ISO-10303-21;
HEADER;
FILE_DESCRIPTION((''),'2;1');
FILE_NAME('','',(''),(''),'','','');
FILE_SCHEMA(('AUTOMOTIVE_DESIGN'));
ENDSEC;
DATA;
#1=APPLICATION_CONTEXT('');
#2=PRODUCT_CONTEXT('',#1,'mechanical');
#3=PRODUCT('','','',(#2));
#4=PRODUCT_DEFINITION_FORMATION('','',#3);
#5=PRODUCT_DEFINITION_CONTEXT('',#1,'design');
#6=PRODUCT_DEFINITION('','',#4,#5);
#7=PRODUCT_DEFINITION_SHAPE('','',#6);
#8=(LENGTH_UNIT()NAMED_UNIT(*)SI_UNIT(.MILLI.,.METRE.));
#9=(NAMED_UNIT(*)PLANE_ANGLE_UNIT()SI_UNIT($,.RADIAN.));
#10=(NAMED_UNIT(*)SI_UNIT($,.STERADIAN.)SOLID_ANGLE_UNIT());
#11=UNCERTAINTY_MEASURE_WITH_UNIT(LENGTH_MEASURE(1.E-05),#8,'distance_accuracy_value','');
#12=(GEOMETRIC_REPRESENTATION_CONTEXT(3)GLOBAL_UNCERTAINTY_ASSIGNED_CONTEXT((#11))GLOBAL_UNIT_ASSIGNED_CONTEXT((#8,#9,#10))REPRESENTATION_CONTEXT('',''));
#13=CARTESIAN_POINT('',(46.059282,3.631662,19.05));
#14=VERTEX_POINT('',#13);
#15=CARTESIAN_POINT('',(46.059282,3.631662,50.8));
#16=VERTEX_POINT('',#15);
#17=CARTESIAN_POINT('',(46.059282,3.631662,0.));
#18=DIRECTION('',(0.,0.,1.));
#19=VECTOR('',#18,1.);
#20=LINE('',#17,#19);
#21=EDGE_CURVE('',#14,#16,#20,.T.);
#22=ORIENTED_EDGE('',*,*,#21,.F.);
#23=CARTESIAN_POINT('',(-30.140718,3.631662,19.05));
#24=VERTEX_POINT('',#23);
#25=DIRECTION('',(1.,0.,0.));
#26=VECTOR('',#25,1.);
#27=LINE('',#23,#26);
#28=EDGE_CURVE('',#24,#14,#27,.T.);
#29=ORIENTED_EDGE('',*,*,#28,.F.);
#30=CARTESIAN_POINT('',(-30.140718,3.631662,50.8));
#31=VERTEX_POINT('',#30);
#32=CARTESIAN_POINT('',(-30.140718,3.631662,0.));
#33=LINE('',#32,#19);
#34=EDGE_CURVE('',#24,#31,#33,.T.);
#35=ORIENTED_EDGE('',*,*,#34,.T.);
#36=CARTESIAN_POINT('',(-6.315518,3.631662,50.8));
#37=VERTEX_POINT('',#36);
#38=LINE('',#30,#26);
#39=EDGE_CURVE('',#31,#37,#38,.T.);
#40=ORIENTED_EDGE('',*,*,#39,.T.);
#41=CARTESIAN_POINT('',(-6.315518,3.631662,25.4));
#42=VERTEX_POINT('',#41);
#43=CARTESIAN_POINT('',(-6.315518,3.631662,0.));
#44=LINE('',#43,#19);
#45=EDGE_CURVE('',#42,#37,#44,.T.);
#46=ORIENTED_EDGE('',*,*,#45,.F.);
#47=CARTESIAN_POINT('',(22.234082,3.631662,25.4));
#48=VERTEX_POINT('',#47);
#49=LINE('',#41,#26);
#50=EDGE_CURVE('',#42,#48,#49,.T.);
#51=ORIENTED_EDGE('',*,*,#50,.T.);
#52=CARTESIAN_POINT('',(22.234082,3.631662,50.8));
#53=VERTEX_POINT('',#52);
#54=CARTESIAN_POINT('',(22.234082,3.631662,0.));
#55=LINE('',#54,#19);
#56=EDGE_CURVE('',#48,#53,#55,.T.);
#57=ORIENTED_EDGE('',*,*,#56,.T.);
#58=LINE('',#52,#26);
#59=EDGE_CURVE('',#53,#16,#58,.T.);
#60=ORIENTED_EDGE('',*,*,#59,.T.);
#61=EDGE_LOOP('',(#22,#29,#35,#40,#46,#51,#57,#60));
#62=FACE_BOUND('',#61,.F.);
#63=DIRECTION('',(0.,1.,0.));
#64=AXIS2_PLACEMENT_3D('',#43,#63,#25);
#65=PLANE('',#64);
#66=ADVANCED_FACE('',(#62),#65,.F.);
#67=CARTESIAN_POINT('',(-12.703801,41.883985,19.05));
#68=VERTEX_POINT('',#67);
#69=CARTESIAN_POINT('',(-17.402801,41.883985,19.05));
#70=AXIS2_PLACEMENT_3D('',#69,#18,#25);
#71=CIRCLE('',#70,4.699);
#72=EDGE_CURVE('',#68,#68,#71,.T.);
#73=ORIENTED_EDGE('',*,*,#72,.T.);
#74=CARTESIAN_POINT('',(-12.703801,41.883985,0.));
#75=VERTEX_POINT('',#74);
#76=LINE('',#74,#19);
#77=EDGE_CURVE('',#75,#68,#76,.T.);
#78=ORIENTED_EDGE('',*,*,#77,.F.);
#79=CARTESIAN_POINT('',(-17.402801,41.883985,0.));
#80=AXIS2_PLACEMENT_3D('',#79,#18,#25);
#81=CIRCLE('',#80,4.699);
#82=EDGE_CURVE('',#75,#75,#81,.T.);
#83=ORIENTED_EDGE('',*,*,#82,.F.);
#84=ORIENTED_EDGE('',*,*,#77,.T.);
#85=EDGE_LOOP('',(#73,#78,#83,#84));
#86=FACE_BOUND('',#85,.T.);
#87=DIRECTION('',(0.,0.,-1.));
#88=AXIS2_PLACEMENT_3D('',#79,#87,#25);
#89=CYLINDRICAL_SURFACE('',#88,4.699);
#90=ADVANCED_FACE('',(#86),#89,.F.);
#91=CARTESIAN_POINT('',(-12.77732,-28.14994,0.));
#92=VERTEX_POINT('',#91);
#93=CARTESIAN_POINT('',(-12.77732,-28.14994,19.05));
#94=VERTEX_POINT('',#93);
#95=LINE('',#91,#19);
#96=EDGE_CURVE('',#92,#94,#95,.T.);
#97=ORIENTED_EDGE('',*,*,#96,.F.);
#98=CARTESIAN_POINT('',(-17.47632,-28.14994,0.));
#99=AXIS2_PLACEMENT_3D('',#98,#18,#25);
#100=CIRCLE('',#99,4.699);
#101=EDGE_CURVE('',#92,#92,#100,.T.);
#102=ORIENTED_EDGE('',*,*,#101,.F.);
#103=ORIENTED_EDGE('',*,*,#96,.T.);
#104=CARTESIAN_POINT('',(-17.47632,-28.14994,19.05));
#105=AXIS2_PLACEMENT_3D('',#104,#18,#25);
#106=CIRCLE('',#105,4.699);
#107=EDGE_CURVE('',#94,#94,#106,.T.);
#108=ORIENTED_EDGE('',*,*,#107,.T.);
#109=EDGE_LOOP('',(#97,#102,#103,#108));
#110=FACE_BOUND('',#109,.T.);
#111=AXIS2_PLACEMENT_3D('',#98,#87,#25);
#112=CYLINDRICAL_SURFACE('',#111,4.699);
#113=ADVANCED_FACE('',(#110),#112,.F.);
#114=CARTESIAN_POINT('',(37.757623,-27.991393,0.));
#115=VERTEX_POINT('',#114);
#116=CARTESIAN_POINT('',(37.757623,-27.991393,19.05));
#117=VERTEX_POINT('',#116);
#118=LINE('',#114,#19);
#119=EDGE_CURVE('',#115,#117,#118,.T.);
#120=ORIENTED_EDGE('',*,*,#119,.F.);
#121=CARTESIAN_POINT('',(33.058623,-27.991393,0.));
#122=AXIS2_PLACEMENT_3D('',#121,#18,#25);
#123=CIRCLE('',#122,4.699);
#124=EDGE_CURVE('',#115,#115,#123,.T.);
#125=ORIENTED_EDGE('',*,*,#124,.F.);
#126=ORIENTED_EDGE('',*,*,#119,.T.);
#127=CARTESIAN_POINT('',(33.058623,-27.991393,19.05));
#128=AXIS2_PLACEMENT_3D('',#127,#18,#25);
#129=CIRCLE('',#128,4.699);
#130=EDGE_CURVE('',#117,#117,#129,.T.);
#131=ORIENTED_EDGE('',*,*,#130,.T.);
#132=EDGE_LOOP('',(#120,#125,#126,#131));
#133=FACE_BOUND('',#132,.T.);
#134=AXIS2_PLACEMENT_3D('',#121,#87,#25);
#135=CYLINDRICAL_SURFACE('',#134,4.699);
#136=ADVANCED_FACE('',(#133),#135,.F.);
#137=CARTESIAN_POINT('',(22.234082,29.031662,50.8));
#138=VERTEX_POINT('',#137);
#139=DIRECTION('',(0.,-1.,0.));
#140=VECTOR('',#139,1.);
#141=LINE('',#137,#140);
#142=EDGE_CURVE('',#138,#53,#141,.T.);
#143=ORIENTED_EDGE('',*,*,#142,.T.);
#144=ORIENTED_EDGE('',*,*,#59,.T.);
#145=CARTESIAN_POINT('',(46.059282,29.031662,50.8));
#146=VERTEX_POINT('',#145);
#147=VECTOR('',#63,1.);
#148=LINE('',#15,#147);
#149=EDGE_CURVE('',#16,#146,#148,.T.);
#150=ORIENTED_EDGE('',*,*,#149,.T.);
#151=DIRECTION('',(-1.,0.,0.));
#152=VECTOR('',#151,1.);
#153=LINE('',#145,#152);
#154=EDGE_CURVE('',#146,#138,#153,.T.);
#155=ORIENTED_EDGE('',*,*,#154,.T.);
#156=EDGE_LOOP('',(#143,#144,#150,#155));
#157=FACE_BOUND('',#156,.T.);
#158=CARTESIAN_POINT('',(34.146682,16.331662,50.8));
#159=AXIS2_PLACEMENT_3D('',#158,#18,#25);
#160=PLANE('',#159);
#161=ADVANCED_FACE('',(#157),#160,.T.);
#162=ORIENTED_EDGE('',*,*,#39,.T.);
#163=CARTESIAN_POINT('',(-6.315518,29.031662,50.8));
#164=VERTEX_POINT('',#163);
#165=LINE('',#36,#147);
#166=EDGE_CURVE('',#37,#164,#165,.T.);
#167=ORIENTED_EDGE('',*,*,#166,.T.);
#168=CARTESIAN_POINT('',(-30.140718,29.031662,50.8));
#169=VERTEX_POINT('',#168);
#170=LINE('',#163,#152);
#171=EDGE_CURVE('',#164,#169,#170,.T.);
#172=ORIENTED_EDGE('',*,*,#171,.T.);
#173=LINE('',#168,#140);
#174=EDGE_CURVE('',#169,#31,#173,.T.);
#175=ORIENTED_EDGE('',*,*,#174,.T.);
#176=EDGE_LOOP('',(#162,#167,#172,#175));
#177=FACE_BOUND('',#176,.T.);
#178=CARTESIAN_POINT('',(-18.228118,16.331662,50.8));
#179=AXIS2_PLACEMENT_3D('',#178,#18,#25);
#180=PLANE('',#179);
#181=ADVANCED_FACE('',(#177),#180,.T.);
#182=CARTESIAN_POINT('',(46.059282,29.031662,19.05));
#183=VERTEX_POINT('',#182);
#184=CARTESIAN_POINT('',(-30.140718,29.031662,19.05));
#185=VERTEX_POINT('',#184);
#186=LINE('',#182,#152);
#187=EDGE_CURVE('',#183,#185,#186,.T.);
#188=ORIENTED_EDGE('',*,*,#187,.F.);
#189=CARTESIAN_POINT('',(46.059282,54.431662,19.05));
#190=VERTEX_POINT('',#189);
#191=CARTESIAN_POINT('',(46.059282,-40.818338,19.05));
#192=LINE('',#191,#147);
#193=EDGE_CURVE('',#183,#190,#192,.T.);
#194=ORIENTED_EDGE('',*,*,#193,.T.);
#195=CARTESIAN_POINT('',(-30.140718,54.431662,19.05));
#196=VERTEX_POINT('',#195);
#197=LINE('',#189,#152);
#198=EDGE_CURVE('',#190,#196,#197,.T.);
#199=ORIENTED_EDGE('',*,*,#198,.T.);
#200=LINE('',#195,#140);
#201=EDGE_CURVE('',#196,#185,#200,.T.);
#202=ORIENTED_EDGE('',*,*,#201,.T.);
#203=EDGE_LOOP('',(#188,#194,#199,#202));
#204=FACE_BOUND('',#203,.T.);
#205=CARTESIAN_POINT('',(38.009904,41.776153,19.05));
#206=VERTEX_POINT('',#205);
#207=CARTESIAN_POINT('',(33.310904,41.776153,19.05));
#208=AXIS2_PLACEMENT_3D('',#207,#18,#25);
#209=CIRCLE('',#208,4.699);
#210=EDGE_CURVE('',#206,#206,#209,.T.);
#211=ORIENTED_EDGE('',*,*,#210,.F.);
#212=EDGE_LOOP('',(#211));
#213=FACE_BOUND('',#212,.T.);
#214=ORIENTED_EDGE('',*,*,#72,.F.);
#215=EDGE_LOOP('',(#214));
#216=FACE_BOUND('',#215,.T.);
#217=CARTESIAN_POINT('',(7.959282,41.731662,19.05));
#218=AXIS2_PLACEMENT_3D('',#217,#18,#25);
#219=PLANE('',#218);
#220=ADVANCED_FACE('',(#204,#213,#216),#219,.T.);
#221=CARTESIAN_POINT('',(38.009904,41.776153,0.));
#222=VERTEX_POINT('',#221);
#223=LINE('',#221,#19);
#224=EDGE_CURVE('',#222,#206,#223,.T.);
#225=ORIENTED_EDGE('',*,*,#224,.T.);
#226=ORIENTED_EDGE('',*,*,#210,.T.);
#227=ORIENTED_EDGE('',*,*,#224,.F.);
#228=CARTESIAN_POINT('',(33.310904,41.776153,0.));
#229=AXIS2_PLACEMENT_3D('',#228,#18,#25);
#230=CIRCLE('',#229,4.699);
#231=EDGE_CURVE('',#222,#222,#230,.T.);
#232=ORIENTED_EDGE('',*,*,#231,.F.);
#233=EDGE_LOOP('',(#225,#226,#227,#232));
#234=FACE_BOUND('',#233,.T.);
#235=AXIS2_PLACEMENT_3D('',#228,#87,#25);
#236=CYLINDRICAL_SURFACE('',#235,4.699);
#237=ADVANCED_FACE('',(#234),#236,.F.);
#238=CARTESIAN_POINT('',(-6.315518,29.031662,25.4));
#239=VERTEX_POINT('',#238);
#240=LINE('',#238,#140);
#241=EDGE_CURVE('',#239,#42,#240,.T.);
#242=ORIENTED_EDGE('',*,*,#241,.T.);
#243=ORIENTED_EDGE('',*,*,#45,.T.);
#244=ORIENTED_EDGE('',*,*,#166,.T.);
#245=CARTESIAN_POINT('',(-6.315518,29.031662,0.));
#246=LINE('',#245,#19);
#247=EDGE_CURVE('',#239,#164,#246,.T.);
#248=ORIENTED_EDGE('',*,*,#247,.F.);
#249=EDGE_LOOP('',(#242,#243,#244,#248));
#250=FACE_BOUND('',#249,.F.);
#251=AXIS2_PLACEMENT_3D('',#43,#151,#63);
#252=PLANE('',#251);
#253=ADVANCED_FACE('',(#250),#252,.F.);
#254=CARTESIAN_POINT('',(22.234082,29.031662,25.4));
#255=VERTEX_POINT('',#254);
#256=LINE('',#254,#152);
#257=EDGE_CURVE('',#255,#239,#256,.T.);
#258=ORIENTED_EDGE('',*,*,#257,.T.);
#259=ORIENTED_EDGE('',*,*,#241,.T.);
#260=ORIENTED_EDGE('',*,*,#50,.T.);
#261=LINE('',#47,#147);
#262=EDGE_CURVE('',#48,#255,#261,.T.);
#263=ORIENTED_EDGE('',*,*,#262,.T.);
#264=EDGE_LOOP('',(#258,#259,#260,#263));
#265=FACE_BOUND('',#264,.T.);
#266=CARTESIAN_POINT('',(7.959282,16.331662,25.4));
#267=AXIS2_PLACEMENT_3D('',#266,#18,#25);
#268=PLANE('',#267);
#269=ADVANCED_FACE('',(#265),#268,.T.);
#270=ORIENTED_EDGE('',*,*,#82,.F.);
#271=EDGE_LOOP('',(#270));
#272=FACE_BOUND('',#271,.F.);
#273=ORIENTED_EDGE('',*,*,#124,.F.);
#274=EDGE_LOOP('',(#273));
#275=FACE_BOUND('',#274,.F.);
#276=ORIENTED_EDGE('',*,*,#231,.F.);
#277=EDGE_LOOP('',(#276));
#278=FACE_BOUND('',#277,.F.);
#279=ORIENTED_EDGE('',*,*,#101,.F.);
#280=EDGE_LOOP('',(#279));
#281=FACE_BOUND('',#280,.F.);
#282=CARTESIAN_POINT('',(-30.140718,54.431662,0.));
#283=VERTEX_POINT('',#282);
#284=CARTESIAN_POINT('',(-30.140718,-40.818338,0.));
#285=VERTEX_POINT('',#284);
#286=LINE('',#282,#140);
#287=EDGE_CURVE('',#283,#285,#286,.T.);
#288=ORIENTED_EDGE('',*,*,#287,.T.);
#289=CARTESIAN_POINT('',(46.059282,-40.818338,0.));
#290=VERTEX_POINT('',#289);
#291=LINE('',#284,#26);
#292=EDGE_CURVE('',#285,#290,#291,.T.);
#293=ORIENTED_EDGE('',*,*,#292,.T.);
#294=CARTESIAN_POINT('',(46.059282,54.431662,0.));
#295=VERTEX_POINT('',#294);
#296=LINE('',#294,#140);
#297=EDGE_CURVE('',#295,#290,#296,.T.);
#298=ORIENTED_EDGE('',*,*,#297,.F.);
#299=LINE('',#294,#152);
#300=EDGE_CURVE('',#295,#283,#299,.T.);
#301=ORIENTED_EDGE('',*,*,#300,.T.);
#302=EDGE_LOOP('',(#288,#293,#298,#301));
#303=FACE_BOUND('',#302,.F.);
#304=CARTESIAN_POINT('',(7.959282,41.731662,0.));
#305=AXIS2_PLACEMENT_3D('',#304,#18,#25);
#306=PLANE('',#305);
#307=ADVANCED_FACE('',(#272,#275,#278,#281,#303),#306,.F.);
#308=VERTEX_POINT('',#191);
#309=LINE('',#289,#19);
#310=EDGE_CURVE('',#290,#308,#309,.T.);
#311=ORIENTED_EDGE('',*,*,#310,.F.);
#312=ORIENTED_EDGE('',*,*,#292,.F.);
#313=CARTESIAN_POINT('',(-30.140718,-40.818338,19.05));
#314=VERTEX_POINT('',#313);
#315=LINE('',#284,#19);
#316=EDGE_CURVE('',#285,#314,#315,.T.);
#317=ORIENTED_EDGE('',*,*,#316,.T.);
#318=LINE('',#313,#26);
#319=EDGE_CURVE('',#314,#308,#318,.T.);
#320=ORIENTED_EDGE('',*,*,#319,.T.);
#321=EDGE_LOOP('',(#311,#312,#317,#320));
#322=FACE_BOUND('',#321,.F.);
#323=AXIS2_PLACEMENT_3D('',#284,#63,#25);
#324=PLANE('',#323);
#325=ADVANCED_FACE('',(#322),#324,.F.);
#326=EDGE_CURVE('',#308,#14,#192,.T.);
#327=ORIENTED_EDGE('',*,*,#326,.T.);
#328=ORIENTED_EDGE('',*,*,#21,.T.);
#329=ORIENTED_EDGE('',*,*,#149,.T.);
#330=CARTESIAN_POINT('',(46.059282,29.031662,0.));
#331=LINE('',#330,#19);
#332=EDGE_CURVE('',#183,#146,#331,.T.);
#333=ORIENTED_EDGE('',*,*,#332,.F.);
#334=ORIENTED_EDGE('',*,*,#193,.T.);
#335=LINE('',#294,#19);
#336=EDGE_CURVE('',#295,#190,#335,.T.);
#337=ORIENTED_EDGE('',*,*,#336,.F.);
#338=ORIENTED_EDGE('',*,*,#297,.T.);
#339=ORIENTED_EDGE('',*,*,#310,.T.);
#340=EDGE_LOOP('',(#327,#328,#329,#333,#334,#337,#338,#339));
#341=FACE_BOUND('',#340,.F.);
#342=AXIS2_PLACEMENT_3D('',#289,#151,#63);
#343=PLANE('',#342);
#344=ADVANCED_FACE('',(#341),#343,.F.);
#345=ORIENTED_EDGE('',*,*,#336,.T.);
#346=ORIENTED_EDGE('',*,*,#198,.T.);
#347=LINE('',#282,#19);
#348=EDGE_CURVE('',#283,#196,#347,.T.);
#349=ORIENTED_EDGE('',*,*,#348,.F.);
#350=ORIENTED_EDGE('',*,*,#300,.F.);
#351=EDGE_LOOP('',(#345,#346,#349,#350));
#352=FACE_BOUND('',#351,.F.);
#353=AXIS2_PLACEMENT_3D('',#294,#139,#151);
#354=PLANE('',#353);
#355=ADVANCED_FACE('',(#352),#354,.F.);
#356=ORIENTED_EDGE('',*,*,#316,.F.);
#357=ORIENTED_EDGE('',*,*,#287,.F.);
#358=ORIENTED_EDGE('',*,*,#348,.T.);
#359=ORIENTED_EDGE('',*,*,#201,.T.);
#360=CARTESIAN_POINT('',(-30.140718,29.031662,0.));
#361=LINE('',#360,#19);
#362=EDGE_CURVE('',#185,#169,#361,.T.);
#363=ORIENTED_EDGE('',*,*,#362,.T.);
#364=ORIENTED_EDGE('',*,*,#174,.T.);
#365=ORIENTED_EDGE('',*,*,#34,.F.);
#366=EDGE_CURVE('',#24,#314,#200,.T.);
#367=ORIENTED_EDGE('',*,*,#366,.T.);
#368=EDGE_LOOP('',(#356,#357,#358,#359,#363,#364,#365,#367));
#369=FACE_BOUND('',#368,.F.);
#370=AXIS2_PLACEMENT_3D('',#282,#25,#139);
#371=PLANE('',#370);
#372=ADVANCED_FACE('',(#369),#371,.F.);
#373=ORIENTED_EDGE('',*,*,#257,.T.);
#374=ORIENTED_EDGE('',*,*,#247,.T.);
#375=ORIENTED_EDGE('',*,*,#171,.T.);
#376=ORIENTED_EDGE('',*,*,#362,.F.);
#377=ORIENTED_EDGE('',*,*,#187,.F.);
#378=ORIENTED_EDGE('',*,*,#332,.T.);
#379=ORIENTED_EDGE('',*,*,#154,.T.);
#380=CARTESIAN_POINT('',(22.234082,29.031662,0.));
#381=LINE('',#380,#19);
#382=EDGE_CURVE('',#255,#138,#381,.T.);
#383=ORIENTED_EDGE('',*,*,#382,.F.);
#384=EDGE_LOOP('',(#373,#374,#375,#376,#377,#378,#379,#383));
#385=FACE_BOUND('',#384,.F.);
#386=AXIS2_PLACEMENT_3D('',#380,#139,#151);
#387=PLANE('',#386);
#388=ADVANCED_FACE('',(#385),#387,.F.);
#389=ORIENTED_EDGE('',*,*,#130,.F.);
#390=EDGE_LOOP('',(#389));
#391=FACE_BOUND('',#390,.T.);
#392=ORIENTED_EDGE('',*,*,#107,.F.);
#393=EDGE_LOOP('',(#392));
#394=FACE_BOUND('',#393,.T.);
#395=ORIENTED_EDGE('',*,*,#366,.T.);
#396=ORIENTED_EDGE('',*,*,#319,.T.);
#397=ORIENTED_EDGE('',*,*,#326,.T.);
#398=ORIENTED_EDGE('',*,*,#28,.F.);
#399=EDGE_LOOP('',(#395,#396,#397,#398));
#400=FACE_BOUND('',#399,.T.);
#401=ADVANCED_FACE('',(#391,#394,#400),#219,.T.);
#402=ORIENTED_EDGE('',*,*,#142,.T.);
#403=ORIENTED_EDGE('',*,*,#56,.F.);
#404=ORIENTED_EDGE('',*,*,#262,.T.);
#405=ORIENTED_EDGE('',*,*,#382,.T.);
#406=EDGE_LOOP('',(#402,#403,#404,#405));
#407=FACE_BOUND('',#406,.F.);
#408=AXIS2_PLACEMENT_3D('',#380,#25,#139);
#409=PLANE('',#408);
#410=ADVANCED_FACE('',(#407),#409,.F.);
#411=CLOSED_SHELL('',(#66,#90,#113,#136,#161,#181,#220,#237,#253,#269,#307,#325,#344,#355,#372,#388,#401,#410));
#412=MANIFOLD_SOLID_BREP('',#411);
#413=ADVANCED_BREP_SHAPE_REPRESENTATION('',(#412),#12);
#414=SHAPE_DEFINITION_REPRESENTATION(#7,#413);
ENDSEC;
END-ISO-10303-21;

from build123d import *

# Parameters (mm, degrees)
F0_R     = 4.699
F1_DEPTH = 19.05
F2_DEPTH = 50.8
F3_DEPTH = 25.4


# Not quite as in the source:
# - a feature of the source that left no trace in its solid (it failed there, or was rolled back) is left out


with BuildPart() as f1:
    # F0 (on Top) → F1 (new body)
    with BuildSketch(Plane.XY):
        Polygon((46.0592823896, 54.4316620976), (-30.1407176104, 54.4316620976), (-30.1407176104, 29.0316620976), (-6.3155176104, 29.0316620976), (22.2340823896, 29.0316620976), (46.0592823896, 29.0316620976), align=None)
        with Locations((-17.4028014716, 41.883985333)):
            Circle(F0_R, mode=Mode.SUBTRACT)
        with Locations((33.3109036978, 41.7761531395)):
            Circle(F0_R, mode=Mode.SUBTRACT)
        Polygon((-6.3155176104, 29.0316620976), (-30.1407176104, 29.0316620976), (-30.1407176104, 3.6316620976), (-6.3155176104, 3.6316620976), (-6.3155176104, 16.6544260591), align=None)
        Polygon((-6.3155176104, 3.6316620976), (-30.1407176104, 3.6316620976), (-30.1407176104, -27.9789566994), (-30.1407176104, -40.8183379024), (-23.7907176104, -40.8183379024), (-17.4407176104, -40.8183379024), (33.3592823896, -40.8183379024), (46.0592823896, -40.8183379024), (46.0592823896, -28.1183379024), (46.0592823896, 3.6316620976), (22.2340823896, 3.6316620976), align=None)
        with Locations((-17.4763201279, -28.1499404974)):
            Circle(F0_R, mode=Mode.SUBTRACT)
        with Locations((33.0586231201, -27.9913925288)):
            Circle(F0_R, mode=Mode.SUBTRACT)
        Polygon((46.0592823896, 3.6316620976), (46.0592823896, 29.0316620976), (22.2340823896, 29.0316620976), (22.2340823896, 18.1238111109), (22.2340823896, 3.6316620976), align=None)
    extrude(amount=F1_DEPTH)

    # F0 (on Top) → F2 (join)
    with BuildSketch(Plane.XY):
        Polygon((-6.3155176104, 29.0316620976), (-30.1407176104, 29.0316620976), (-30.1407176104, 3.6316620976), (-6.3155176104, 3.6316620976), (-6.3155176104, 16.6544260591), align=None)
        Polygon((46.0592823896, 3.6316620976), (46.0592823896, 29.0316620976), (22.2340823896, 29.0316620976), (22.2340823896, 18.1238111109), (22.2340823896, 3.6316620976), align=None)
    extrude(amount=F2_DEPTH)

    # F0 (on Top) → F3 (join)
    with BuildSketch(Plane.XY):
        Polygon((22.2340823896, 29.0316620976), (-6.3155176104, 29.0316620976), (-6.3155176104, 16.6544260591), (-6.3155176104, 3.6316620976), (22.2340823896, 3.6316620976), (22.2340823896, 18.1238111109), align=None)
    extrude(amount=F3_DEPTH)


solid = f1.part
